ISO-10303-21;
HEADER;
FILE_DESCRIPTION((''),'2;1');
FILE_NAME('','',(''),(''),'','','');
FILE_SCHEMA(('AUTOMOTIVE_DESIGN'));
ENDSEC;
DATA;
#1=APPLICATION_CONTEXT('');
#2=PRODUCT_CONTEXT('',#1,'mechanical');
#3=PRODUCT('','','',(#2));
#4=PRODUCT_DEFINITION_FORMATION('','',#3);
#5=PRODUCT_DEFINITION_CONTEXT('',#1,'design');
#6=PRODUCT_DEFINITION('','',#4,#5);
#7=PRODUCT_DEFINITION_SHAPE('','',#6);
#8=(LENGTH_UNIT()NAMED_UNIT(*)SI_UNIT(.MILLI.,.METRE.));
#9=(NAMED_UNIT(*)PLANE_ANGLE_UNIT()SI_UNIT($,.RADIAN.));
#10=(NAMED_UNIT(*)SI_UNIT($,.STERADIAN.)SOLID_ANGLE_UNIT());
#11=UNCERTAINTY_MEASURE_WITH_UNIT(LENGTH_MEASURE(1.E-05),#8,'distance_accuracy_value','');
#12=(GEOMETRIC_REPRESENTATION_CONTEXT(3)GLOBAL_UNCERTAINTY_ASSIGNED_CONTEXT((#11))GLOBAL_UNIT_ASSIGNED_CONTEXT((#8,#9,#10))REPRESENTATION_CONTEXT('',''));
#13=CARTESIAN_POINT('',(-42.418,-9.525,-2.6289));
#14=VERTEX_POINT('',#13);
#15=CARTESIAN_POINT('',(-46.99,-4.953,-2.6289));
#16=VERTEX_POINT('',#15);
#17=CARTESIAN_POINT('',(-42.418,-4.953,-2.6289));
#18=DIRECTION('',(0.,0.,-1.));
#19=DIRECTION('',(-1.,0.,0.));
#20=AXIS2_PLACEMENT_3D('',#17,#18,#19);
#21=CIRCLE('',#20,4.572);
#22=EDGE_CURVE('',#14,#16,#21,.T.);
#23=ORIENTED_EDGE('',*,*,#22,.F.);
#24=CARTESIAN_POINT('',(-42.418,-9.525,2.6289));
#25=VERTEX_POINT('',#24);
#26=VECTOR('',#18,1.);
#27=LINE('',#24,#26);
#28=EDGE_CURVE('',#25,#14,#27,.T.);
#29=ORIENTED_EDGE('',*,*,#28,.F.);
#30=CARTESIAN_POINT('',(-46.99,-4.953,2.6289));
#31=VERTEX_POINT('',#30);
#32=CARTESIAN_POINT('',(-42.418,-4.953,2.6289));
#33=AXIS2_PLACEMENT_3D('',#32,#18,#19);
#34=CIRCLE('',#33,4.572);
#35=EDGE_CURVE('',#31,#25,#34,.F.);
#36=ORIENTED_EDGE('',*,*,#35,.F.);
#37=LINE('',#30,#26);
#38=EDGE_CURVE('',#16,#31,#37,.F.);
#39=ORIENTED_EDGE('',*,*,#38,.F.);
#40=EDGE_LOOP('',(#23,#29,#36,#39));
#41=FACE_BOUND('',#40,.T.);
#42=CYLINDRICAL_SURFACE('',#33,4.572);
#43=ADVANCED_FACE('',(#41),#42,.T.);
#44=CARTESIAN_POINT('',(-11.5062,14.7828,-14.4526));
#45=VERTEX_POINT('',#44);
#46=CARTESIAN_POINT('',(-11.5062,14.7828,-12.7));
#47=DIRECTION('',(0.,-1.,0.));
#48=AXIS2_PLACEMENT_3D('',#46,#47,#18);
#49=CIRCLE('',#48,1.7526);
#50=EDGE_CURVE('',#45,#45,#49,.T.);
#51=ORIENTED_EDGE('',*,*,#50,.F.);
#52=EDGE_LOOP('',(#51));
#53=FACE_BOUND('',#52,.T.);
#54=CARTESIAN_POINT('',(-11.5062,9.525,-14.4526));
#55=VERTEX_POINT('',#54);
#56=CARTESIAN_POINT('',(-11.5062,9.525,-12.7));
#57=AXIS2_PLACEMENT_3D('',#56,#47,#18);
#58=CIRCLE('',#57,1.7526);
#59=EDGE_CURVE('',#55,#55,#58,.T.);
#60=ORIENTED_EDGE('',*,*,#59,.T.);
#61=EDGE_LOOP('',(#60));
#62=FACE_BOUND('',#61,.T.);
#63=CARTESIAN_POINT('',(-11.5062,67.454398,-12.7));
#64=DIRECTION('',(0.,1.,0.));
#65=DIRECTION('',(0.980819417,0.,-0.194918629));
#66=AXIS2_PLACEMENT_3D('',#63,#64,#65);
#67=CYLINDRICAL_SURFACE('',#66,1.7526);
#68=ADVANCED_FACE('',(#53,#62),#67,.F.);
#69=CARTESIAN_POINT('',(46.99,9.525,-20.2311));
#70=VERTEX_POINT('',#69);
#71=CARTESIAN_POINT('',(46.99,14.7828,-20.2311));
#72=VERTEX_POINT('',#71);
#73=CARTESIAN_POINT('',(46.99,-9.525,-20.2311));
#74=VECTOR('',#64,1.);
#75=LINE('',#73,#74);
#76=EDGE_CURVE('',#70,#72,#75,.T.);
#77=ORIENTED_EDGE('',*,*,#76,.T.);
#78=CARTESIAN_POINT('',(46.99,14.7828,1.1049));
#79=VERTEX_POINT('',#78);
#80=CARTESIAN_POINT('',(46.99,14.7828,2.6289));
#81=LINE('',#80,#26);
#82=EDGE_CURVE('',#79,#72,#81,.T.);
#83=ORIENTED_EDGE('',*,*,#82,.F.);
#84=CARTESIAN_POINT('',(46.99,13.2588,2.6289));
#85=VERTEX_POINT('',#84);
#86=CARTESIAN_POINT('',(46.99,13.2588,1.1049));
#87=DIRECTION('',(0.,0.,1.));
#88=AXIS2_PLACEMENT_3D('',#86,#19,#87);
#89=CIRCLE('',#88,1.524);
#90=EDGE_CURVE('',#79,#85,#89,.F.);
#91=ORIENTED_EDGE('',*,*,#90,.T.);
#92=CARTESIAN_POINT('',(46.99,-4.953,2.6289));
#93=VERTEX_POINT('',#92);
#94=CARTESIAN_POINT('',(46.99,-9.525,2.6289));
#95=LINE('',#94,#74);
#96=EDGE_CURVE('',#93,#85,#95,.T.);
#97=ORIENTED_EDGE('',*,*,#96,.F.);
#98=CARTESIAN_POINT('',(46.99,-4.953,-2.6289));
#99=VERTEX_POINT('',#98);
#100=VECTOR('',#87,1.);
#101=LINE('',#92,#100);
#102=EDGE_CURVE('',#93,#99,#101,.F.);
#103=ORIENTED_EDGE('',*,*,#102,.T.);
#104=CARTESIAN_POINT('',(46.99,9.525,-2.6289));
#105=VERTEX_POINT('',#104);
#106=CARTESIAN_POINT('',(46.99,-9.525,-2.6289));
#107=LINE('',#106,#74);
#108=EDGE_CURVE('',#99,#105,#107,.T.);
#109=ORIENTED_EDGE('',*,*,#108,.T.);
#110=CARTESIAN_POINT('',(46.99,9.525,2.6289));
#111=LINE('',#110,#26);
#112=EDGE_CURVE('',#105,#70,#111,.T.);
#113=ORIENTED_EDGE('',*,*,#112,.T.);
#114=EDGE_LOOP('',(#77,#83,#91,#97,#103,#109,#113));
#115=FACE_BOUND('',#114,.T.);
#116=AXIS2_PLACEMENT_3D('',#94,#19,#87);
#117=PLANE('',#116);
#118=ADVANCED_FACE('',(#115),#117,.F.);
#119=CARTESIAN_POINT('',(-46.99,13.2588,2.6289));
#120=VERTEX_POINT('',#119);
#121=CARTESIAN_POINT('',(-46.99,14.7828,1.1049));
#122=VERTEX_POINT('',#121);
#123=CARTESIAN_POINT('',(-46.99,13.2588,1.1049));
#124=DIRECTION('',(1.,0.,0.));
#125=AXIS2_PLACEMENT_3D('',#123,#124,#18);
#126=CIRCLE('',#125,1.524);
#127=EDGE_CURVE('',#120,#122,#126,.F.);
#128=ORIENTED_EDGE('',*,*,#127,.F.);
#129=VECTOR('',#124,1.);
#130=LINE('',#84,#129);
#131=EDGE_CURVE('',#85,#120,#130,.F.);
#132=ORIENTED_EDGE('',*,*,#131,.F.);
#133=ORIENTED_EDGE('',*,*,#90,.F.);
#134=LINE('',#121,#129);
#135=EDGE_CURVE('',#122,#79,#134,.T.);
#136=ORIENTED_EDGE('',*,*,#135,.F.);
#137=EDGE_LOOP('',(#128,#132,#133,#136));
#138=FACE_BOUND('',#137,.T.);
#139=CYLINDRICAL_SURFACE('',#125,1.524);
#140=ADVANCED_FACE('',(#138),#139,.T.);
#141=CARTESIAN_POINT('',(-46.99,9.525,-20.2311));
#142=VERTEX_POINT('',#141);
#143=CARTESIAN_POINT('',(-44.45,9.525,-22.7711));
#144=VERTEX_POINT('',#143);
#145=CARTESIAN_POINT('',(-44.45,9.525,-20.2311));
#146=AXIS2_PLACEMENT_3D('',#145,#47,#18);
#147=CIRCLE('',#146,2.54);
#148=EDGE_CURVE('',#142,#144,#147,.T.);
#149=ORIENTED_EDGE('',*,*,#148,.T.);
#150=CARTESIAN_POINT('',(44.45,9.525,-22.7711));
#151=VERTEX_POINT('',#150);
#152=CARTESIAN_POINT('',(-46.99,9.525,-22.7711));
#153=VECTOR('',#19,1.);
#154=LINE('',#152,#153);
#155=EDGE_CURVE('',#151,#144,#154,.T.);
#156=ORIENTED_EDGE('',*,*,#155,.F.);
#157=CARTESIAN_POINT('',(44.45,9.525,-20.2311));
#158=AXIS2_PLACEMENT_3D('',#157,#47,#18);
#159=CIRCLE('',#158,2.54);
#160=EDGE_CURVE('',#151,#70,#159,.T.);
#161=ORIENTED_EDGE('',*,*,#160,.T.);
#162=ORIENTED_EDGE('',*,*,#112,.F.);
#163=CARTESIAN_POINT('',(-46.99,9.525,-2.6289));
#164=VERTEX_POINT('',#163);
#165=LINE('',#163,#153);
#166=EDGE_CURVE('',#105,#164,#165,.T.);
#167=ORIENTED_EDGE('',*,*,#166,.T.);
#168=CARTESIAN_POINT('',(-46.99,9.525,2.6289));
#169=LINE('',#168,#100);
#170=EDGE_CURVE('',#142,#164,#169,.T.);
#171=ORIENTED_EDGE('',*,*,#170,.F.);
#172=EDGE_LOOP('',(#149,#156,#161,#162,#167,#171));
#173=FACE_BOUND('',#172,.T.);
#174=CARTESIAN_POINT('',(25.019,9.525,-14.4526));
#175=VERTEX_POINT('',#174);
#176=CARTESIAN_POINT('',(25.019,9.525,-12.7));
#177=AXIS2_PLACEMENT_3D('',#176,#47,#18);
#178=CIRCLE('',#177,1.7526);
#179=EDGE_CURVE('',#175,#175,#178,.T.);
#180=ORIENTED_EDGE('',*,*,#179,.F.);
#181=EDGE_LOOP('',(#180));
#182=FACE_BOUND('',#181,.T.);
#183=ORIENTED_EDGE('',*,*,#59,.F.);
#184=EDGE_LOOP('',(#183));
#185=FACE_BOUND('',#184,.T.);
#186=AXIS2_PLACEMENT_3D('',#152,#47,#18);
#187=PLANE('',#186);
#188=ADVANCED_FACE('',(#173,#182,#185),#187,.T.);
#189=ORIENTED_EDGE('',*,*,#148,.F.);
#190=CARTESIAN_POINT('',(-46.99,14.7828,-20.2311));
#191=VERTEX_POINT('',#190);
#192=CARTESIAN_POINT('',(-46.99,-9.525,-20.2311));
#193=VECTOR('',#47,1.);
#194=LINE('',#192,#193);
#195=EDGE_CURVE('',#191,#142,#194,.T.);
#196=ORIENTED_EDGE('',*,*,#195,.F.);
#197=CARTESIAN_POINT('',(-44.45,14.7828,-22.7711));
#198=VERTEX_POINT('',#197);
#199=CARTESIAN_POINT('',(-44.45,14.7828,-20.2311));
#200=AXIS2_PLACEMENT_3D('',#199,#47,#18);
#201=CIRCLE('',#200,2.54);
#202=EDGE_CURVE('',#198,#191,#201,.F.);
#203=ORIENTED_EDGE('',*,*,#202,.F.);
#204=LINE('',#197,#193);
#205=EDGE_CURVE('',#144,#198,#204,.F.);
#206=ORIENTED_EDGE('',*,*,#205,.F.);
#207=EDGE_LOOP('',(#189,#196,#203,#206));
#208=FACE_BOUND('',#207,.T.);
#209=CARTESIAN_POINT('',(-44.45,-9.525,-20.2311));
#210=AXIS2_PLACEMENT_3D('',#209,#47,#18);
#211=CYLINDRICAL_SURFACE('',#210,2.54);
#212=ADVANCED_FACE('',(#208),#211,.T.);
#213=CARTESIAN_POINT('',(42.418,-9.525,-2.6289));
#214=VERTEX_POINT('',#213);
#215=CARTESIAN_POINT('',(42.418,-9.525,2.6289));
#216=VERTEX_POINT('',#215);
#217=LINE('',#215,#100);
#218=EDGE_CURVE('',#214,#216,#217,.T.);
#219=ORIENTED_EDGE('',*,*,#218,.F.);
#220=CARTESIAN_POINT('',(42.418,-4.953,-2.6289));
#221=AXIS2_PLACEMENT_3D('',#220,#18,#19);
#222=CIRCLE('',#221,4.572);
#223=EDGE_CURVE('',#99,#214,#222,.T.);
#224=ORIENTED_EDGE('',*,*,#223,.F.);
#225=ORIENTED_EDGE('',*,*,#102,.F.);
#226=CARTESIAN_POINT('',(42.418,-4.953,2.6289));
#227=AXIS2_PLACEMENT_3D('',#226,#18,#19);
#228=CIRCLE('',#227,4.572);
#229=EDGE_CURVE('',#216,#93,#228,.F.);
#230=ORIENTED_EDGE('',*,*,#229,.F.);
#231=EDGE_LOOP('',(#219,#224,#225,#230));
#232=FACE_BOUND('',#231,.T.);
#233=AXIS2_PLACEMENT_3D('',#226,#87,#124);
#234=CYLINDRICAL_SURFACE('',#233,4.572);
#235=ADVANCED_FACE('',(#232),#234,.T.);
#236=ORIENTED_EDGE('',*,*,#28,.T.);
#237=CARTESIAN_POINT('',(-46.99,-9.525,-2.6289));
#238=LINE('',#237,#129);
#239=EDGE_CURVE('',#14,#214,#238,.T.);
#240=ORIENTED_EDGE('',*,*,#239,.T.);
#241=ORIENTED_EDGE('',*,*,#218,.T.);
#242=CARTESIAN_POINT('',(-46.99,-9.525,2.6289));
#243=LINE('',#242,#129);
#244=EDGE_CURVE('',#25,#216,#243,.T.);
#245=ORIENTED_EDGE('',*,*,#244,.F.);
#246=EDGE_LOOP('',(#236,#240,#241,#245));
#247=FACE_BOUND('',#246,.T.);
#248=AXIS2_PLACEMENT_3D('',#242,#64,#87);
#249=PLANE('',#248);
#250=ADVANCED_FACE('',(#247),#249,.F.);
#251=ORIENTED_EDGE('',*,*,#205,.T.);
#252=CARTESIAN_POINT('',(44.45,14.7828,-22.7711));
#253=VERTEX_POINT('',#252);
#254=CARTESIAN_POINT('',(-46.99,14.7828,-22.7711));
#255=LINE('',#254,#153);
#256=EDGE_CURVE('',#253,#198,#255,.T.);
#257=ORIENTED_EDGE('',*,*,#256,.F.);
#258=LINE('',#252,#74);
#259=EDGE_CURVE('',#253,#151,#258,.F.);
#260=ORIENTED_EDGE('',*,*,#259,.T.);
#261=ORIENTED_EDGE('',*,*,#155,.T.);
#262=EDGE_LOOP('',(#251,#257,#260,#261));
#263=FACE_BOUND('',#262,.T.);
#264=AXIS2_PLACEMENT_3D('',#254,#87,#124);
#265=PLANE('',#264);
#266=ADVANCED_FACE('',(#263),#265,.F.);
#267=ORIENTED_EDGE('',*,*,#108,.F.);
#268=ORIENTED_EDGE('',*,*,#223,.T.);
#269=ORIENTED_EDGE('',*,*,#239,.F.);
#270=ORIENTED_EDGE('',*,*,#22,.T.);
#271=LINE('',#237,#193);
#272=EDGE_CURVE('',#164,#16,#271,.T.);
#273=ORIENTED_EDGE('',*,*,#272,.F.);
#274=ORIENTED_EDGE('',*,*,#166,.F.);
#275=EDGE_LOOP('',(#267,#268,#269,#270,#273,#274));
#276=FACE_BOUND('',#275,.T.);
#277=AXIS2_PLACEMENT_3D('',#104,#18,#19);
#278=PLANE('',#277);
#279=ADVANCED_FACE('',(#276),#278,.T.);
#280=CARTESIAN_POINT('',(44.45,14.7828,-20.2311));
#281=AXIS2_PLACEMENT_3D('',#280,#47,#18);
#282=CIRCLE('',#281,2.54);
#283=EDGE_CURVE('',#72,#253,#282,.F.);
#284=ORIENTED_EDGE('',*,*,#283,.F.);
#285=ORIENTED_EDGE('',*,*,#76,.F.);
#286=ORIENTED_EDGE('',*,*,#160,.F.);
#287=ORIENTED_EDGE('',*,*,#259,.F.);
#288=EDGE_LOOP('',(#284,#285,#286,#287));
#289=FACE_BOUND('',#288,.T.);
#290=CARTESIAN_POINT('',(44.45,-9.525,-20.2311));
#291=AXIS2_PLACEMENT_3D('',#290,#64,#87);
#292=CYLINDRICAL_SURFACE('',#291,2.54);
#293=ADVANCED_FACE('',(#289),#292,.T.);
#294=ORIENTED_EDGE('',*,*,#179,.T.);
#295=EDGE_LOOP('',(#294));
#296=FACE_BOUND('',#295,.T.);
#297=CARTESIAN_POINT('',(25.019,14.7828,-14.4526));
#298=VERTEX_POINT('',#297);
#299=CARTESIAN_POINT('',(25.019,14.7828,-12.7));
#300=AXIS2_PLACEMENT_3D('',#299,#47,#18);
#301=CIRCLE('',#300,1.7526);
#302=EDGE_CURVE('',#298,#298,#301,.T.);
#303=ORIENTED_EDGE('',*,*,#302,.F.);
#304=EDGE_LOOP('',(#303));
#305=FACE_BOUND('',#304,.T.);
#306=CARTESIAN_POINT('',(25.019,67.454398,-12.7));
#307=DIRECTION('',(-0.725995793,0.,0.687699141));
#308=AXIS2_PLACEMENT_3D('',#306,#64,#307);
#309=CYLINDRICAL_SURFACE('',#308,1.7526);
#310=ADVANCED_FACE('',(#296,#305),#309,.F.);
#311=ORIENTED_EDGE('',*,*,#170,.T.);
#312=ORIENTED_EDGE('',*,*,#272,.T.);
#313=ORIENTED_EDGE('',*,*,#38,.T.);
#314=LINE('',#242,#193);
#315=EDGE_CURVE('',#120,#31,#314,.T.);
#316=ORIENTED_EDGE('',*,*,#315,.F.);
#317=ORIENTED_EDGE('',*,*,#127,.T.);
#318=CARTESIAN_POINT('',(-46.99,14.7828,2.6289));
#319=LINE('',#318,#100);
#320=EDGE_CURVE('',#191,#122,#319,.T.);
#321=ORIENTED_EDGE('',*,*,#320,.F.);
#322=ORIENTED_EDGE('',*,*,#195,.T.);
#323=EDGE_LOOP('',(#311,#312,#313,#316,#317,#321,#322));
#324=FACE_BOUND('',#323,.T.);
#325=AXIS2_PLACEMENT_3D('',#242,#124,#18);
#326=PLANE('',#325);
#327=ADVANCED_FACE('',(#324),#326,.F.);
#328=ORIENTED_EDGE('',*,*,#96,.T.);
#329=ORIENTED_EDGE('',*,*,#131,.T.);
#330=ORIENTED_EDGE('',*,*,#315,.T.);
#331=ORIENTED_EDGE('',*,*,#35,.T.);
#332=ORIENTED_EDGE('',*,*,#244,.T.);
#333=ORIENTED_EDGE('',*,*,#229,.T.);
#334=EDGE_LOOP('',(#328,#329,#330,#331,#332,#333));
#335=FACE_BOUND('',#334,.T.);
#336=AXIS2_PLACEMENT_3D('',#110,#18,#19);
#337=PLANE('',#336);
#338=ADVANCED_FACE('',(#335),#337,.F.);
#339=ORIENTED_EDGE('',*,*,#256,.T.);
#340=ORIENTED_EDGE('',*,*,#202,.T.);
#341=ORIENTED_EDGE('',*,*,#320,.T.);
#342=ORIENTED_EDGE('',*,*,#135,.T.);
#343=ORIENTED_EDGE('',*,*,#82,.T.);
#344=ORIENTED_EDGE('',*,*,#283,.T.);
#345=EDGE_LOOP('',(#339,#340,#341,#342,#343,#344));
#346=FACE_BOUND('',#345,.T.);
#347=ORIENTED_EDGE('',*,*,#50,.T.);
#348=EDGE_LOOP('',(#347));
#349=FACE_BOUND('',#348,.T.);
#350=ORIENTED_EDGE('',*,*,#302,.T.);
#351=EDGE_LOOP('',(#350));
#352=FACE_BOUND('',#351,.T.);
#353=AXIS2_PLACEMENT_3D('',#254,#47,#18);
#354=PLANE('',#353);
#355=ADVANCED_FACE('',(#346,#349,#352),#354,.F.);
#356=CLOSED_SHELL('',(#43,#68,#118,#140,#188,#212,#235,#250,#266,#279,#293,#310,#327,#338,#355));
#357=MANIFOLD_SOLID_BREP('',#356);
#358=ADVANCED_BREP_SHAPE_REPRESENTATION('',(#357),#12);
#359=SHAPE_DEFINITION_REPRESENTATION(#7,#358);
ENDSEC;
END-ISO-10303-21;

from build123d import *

# Parameters (mm, degrees)
SKETCH1_W           = 93.98
SKETCH1_H           = 19.05
BOSS_EXTRUDE1_DEPTH = 2.6289
SKETCH2_W           = 93.98
SKETCH2_H           = 25.4
BOSS_EXTRUDE2_DEPTH = 5.2578
FILLET6_R           = 4.572
FILLET7_R           = 4.572
FILLET8_R           = 1.524
FILLET9_R           = 2.54
FILLET10_R          = 2.54
CAVITY1_START       = 9.525
CAVITY1_OUTLINE_R   = 1.7526
CAVITY1_DEPTH       = 5.2578


# Read off the part's stored shape, not the designer's step: Cavity1
with BuildPart() as part:
    # Sketch1 → Boss-Extrude1 (new, symmetric)
    with BuildSketch(Plane.XY):
        Rectangle(SKETCH1_W, SKETCH1_H)
    extrude(amount=BOSS_EXTRUDE1_DEPTH, both=True)

    # Sketch2 → Boss-Extrude2 (add)
    with BuildSketch(Plane(origin=(0, 9.525, 0), x_dir=(1, 0, 0), z_dir=(0, 1, 0))):
        with Locations((0, 10.0711)):
            Rectangle(SKETCH2_W, SKETCH2_H)
    extrude(amount=BOSS_EXTRUDE2_DEPTH)

    # Fillet6
    fillet6_edges = [part.edges().sort_by_distance(p)[0] for p in [
        (-46.99, -9.525, 0),
    ]]
    fillet(fillet6_edges, radius=FILLET6_R)

    # Fillet7
    fillet7_edges = [part.edges().sort_by_distance(p)[0] for p in [
        (46.99, -9.525, 0),
    ]]
    fillet(fillet7_edges, radius=FILLET7_R)

    # Fillet8
    fillet8_edges = [part.edges().sort_by_distance(p)[0] for p in [
        (0, 14.7828, 2.6289),
    ]]
    fillet(fillet8_edges, radius=FILLET8_R)

    # Fillet9
    fillet9_edges = [part.edges().sort_by_distance(p)[0] for p in [
        (-46.99, 12.1539, -22.7711),
    ]]
    fillet(fillet9_edges, radius=FILLET9_R)

    # Fillet10
    fillet10_edges = [part.edges().sort_by_distance(p)[0] for p in [
        (46.99, 12.1539, -22.7711),
    ]]
    fillet(fillet10_edges, radius=FILLET10_R)

    # Cavity1 outline → Cavity1 (cut)
    with BuildSketch(Plane(origin=(0, 0, 0), x_dir=(1, 0, 0), z_dir=(0, 1, 0)).offset(CAVITY1_START)):
        with Locations((25.019, 12.7)):
            Circle(CAVITY1_OUTLINE_R)
        with Locations((-11.5062, 12.7)):
            Circle(CAVITY1_OUTLINE_R)
    extrude(amount=CAVITY1_DEPTH, mode=Mode.SUBTRACT)


solid = part.part
